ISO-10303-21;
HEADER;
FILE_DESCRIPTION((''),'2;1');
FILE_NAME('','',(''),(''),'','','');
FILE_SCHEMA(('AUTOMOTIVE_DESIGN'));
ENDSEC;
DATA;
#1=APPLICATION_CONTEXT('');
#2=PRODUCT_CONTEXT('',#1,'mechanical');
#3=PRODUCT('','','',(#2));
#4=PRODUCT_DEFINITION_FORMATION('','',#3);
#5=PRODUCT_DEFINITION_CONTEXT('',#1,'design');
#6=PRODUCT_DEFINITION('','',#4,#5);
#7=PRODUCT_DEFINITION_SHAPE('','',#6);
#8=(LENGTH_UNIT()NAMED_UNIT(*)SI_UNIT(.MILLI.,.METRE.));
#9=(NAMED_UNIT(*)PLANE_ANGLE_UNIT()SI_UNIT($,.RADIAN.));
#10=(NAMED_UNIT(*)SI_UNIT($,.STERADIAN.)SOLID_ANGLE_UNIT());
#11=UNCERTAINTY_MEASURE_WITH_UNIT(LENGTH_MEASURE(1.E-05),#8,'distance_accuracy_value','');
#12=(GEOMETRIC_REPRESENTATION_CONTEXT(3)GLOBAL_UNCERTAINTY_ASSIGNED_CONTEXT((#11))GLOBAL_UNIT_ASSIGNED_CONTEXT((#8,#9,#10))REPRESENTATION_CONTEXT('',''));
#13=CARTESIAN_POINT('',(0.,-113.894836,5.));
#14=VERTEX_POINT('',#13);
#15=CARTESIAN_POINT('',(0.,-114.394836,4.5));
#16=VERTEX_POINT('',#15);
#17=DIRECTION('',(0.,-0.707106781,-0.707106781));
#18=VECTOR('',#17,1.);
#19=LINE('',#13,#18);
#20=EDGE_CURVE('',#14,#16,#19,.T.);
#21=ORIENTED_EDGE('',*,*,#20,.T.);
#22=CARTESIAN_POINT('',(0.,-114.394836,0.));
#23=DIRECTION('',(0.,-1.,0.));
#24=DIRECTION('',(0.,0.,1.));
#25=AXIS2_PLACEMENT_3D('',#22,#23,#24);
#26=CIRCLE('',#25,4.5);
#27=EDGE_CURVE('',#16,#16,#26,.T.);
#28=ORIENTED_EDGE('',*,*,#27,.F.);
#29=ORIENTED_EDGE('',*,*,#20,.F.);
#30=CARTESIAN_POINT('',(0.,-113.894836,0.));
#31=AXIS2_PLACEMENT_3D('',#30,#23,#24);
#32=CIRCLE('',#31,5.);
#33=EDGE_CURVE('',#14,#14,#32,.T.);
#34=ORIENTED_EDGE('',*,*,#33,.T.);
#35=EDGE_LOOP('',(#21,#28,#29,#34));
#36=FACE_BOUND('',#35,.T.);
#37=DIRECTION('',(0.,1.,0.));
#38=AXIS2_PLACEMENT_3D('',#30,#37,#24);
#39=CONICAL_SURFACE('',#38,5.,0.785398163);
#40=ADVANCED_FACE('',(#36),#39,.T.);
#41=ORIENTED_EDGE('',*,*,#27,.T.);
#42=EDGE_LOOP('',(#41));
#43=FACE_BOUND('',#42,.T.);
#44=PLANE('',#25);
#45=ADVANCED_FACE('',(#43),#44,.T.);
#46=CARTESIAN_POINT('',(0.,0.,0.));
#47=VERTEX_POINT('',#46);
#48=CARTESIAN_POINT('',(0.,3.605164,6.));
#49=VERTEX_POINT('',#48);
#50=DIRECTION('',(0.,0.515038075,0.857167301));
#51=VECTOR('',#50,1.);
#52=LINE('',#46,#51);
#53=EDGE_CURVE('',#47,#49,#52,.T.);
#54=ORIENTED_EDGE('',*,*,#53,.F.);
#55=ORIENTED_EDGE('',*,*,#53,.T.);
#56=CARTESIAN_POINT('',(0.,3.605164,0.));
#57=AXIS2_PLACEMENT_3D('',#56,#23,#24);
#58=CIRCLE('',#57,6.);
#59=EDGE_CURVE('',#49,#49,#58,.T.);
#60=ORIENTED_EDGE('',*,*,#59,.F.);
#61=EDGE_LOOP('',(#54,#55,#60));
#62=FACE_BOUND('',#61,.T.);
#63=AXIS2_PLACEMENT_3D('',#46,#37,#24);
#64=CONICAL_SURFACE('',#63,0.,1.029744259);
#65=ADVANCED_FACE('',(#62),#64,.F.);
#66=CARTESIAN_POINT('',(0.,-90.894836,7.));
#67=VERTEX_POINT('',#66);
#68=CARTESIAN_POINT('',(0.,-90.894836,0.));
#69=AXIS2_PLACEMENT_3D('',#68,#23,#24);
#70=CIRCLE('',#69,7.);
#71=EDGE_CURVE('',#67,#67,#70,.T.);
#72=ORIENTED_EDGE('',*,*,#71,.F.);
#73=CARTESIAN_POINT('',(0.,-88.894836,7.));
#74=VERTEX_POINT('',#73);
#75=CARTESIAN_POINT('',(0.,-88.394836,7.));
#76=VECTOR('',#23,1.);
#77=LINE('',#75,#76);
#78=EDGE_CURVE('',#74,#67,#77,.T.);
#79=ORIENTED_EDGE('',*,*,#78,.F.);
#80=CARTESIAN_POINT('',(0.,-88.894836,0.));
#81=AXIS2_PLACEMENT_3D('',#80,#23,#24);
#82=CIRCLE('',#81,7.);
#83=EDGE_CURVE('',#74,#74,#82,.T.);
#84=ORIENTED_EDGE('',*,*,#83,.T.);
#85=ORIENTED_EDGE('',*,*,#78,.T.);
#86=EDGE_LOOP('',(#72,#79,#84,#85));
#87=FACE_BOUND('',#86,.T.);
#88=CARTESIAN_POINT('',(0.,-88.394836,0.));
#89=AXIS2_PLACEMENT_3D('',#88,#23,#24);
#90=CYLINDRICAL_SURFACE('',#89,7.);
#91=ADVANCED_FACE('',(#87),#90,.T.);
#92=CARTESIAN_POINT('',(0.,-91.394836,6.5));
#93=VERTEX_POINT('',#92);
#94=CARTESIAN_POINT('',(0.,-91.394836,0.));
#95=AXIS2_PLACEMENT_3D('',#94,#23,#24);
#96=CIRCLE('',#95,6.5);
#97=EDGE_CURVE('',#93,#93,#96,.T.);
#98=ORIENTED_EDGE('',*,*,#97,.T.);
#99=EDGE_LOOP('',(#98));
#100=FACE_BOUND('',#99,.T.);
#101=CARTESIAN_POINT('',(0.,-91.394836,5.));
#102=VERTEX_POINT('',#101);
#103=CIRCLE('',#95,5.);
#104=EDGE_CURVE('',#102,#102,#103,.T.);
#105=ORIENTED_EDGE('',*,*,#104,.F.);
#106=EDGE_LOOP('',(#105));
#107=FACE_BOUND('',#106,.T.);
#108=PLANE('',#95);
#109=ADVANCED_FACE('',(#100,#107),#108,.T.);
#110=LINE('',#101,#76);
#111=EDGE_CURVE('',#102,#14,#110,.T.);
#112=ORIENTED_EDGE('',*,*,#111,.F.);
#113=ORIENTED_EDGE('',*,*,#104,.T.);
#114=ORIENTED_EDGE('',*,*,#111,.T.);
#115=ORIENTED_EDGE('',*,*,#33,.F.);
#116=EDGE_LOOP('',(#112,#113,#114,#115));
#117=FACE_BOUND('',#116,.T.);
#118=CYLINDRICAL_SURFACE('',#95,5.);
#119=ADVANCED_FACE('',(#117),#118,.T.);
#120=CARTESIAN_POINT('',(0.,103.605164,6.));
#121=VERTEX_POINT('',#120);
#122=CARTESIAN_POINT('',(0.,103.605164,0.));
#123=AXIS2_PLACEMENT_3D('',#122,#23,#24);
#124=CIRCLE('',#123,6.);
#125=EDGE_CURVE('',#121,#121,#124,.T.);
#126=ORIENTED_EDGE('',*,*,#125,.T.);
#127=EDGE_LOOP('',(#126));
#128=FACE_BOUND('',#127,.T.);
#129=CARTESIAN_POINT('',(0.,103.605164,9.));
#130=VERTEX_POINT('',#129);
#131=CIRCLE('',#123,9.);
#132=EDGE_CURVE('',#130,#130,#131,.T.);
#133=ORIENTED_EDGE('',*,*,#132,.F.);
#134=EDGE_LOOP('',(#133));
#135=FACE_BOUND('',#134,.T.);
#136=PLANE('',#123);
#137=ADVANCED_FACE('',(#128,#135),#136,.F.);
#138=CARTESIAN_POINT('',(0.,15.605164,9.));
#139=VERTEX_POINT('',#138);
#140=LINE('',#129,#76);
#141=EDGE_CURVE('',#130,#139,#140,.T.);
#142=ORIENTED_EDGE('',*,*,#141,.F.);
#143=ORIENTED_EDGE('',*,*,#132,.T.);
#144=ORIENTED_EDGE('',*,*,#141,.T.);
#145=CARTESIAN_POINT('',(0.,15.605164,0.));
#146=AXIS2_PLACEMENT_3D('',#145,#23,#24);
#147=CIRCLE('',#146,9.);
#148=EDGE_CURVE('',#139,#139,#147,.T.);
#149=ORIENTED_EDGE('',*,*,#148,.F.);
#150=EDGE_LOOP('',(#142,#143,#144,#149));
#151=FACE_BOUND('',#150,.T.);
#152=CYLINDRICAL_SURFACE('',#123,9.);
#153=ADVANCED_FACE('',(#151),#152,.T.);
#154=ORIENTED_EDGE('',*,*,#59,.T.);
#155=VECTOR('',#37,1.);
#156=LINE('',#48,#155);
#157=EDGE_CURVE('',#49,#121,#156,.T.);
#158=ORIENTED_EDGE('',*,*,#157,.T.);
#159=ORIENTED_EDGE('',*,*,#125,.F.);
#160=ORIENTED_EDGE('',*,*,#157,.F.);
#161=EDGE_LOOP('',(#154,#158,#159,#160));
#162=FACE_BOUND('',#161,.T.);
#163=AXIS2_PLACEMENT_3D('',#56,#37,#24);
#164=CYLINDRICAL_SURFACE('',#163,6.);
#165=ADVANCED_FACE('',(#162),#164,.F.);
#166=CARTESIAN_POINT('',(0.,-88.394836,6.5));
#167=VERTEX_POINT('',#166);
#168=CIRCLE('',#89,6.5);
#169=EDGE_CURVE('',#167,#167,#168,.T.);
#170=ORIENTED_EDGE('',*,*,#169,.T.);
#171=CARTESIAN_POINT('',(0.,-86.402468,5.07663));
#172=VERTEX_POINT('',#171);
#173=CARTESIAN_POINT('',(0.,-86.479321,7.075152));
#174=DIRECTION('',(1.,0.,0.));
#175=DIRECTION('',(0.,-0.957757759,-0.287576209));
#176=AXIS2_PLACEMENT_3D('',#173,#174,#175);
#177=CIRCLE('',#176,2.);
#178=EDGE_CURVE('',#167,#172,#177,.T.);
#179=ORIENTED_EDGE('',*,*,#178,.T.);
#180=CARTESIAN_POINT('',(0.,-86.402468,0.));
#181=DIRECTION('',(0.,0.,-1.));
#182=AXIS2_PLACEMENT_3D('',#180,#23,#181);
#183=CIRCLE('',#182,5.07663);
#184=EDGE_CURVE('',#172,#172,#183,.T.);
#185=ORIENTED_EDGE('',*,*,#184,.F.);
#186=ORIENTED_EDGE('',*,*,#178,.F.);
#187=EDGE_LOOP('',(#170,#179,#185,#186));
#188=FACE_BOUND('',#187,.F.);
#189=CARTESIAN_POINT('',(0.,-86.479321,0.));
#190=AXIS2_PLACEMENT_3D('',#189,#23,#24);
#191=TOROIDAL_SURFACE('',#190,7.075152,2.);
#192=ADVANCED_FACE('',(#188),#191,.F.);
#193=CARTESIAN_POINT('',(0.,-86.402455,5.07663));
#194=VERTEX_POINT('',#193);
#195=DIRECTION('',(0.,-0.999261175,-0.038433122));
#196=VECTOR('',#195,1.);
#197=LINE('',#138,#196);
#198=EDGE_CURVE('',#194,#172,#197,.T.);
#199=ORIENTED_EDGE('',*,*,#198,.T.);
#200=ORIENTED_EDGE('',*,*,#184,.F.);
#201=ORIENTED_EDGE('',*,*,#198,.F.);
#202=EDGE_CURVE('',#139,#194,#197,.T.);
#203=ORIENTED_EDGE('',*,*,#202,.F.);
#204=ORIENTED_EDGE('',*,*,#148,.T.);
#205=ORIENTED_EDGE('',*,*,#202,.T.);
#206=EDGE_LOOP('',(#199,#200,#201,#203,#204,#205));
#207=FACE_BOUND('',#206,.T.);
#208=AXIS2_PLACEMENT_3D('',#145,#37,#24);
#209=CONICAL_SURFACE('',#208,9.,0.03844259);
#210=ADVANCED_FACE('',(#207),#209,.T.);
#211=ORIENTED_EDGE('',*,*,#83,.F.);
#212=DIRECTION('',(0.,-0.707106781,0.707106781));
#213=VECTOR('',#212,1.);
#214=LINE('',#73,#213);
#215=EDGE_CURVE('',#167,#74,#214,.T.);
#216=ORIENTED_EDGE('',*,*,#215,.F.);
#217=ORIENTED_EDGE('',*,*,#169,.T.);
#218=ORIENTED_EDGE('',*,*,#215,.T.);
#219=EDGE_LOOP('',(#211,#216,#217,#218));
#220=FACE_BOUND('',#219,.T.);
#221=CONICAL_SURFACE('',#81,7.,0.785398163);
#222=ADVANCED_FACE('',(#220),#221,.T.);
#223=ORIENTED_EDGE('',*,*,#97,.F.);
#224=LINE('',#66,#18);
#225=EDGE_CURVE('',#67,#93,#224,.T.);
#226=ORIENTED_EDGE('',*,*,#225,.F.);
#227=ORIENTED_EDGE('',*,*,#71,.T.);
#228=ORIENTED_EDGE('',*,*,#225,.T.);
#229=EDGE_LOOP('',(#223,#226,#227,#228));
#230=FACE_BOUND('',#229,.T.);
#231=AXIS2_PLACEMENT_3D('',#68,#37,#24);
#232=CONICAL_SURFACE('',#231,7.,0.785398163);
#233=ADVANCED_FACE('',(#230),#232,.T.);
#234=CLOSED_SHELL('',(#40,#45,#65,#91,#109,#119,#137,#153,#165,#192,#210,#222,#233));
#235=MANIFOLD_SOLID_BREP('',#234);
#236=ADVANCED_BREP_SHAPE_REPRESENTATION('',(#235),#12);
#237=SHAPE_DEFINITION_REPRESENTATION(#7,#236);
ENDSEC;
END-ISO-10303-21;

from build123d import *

# Parameters (mm, degrees)
F2_SIZE = 0.5


# Not quite as in the source:
# - a fillet or chamfer that OpenCascade refuses, or shapes differently, is made with other operations: its cross-section is extruded or revolved along the edge and cut away or added


with BuildPart() as f1:
    # F0 (on Right) → F1 (revolve)
    with BuildSketch(Plane.YZ):
        Polygon((103.6051637142, 6), (103.6051637142, 9), (15.6051637142, 9), (-88.3948362864, 5), (-88.3948362864, 7), (-91.3948362864, 7), (-91.3948362864, 5), (-114.3948362864, 5), (-114.3948362864, 0), (0, 0), (3.6051637142, 6), align=None)
    revolve(axis=Axis((0, -57.1974181432, 0), (0, -1, 0)))

    # F2
    f2_edges = [f1.edges().sort_by_distance(p)[0] for p in [
        (0, -91.394836, -7),
        (0, -88.394836, -7),
        (0, -114.394836, -5),
    ]]
    chamfer(f2_edges, length=F2_SIZE)

    # F3: fillet of radius 2 on 1 edges, made by hand

    # F3_s1 → F3_t2 (revolve)
    with BuildSketch(Plane.YZ):
        with BuildLine():
            ThreePointArc((-88.3948362864, 6.5), (-87.641927013, 5.4477782371), (-86.4024545248, 5.0766300678))
            Line((-86.4024545248, 5.0766300678), (-86.4009172, 5.0366596208))
            Line((-86.4009172, 5.0366596208), (-88.3932989615, 4.960029553))
            Line((-88.3932989615, 4.960029553), (-88.4348362864, 5))
            ThreePointArc((-88.4348362864, 5), (-88.4348362864, 5.75), (-88.4331465967, 6.4884969517))
            Line((-88.4331465967, 6.4884969517), (-88.3948362864, 6.5))
        make_face()
    revolve(axis=Axis((0, -88.3948362864, 0), (0, -1, 0)))


solid = f1.part
